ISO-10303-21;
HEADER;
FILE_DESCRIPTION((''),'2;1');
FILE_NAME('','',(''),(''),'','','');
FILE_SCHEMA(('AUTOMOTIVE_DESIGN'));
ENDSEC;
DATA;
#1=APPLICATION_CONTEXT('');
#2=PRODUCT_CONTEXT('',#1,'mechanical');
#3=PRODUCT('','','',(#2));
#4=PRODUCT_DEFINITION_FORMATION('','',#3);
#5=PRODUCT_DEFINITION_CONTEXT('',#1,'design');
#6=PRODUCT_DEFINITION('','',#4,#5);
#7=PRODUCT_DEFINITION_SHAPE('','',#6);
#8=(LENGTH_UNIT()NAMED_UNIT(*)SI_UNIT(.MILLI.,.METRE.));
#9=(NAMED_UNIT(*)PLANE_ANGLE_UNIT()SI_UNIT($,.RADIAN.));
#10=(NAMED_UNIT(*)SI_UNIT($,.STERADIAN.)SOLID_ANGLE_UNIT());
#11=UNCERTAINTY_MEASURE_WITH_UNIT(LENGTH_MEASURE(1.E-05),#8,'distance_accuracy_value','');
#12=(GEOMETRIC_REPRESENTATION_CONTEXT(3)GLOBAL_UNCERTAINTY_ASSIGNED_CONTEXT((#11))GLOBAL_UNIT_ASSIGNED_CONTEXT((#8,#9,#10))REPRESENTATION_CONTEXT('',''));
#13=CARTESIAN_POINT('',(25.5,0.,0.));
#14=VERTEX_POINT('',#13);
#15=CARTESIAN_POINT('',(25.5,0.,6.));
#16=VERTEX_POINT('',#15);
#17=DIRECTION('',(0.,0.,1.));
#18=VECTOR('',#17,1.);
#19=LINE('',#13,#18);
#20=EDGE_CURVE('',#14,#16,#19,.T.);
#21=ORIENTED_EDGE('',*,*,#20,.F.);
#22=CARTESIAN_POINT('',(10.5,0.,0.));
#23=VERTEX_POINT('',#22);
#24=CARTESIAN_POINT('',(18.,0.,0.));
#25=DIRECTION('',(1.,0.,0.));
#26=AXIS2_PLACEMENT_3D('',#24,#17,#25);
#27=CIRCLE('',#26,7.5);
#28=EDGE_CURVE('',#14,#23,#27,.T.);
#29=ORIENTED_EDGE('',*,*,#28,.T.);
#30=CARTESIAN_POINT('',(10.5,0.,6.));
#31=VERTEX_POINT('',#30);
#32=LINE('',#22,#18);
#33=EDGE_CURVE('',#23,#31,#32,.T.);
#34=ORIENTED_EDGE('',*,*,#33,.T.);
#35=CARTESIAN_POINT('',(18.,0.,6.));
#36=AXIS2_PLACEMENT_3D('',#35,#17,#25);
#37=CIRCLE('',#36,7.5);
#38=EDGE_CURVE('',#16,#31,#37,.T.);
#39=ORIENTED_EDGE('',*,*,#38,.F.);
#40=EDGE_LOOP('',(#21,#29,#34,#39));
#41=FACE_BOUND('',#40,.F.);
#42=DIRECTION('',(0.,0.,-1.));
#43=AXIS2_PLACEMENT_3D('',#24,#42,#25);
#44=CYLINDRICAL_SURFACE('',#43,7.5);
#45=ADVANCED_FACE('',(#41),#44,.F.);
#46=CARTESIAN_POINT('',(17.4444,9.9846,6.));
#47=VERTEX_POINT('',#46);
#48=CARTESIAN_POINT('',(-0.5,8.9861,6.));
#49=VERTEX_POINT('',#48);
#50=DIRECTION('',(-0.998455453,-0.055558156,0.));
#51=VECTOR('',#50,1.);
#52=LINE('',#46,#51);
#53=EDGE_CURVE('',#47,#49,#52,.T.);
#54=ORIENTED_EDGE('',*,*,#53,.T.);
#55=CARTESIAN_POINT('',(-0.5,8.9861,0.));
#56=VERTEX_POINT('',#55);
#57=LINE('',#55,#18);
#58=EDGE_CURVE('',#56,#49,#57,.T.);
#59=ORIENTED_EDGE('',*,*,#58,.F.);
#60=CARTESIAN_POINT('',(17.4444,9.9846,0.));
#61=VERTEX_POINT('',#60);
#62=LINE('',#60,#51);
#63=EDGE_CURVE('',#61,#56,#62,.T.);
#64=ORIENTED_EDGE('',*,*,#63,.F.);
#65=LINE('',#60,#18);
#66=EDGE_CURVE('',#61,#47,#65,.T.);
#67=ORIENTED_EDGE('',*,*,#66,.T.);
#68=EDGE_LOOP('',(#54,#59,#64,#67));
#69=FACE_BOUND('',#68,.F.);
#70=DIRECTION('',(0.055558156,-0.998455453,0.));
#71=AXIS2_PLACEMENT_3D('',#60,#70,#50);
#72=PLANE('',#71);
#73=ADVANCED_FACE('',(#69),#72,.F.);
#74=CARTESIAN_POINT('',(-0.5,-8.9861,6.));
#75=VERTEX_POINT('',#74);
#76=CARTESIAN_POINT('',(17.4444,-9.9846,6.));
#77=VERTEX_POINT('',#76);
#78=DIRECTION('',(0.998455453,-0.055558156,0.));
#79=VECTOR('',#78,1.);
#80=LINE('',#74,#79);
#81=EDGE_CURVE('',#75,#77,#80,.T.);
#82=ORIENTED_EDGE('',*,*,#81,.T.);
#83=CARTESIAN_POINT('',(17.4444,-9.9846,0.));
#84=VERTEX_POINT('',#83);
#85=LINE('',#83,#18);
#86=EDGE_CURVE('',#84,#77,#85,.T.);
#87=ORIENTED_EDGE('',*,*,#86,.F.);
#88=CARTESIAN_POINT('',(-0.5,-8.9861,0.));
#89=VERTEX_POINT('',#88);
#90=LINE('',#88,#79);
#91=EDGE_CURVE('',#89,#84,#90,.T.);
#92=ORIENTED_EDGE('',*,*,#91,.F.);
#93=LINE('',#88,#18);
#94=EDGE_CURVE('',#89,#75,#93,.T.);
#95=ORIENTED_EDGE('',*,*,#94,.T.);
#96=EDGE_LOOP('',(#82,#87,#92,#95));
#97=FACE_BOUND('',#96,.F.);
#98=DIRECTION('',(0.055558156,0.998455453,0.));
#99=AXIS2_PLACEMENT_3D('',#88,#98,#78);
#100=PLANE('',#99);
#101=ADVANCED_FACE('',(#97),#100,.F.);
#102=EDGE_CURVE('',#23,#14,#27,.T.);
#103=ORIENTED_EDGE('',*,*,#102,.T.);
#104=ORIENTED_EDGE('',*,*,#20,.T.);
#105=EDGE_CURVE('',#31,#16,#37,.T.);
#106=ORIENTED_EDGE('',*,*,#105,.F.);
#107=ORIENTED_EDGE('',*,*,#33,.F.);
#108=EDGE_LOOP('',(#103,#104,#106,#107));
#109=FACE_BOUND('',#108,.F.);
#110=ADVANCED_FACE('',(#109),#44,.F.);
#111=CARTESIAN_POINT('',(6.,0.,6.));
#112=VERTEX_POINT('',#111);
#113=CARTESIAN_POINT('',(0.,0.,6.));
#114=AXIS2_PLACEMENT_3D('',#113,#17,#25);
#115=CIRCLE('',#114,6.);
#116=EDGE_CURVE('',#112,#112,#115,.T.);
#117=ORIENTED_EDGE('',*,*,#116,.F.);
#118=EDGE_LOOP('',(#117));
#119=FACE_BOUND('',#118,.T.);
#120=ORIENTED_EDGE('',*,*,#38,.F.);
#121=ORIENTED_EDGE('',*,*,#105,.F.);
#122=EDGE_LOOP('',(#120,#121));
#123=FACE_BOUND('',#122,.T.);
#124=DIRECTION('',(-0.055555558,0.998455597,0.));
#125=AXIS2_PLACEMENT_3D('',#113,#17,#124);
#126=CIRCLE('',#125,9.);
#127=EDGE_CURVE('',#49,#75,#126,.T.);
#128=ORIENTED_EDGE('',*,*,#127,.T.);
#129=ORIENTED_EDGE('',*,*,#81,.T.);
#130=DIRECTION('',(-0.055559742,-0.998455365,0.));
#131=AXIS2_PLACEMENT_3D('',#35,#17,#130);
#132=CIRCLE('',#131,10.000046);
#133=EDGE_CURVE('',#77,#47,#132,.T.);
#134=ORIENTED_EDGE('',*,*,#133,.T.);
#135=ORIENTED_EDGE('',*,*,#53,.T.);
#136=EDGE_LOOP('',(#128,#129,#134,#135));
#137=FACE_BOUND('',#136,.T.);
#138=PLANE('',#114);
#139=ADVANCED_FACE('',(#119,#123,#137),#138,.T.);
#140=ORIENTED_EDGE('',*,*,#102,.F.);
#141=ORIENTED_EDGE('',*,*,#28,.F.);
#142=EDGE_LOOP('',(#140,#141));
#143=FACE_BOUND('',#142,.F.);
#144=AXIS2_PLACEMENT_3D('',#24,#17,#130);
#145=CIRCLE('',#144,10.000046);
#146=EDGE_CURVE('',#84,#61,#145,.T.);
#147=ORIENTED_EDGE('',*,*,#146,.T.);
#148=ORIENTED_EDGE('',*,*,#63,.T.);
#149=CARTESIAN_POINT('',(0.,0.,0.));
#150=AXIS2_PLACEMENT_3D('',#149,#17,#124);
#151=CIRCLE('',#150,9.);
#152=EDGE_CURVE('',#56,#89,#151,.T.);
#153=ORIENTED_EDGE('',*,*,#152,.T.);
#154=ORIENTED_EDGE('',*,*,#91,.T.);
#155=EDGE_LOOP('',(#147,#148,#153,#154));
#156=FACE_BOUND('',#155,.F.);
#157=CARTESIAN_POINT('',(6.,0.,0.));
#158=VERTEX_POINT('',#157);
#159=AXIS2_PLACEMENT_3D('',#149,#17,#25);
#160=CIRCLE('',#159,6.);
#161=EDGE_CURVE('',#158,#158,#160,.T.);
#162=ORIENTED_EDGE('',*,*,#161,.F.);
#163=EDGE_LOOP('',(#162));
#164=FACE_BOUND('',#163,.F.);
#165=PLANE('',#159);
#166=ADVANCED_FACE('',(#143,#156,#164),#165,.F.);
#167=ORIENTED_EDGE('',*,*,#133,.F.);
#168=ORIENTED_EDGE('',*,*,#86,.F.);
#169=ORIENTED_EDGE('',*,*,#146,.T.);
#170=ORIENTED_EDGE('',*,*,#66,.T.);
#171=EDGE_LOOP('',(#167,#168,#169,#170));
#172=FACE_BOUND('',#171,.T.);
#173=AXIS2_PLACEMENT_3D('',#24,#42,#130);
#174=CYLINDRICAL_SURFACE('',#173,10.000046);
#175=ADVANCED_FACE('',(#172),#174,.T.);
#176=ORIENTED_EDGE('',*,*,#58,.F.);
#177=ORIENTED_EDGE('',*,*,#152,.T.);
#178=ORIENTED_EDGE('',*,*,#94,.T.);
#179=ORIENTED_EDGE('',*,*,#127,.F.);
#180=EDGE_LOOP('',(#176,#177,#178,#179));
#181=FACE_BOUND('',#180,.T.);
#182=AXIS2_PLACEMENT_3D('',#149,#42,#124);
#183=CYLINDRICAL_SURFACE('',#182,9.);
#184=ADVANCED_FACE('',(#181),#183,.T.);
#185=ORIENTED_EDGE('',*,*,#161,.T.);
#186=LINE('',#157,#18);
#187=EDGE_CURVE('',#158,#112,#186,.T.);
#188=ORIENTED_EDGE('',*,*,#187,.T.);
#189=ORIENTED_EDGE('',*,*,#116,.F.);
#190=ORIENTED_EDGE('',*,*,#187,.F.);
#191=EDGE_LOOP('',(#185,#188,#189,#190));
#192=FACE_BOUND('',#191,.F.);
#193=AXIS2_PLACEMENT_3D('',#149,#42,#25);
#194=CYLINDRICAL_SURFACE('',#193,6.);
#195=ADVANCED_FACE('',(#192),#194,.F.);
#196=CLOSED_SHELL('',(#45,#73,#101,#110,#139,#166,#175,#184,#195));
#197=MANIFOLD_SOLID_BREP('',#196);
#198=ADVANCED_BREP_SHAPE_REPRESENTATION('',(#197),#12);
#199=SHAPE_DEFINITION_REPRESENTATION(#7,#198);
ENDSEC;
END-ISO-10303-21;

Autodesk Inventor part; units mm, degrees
ref_plane "YZ Plane" through (0, 0, 0) normal (1, 0, 0) x (0, 1, 0)
ref_plane "XZ Plane" through (0, 0, 0) normal (0, 1, 0) x (-1, 0, 0)
ref_plane "XY Plane" through (0, 0, 0) normal (0, 0, 1) x (1, 0, 0)
sketch "Эскиз1" plane through (0, 0, 0) normal (0, 0, 1) x (1, 0, 0)
  circle A0 centre (0, 0) radius 6
  circle A1 centre (18, 0) radius 7.5
  line L0 (0, 0) -> (18, 0)
  line L1 (0, 0) -> (18, 0) construction
  line L2 (-0.5, -8.9861) -> (17.4444, -9.9846)
  line L3 (17.4444, 9.9846) -> (-0.5, 8.9861)
  arc A2 (-0.5, 8.9861) -> (-0.5, -8.9861) centre (0, 0) ccw
  arc A3 (17.4444, -9.9846) -> (17.4444, 9.9846) centre (18, 0) ccw
  point P0 (9, 0)
  dimension "d0" = 12
  dimension "d1" = 15
  dimension "d2" = 18
  dimension "d4" = 9
  dimension "d7" = 10
extrude "Выдавливание1" add sketch "Эскиз1" along normal blind 6
properties part number "Крепление линейного подшипника"
